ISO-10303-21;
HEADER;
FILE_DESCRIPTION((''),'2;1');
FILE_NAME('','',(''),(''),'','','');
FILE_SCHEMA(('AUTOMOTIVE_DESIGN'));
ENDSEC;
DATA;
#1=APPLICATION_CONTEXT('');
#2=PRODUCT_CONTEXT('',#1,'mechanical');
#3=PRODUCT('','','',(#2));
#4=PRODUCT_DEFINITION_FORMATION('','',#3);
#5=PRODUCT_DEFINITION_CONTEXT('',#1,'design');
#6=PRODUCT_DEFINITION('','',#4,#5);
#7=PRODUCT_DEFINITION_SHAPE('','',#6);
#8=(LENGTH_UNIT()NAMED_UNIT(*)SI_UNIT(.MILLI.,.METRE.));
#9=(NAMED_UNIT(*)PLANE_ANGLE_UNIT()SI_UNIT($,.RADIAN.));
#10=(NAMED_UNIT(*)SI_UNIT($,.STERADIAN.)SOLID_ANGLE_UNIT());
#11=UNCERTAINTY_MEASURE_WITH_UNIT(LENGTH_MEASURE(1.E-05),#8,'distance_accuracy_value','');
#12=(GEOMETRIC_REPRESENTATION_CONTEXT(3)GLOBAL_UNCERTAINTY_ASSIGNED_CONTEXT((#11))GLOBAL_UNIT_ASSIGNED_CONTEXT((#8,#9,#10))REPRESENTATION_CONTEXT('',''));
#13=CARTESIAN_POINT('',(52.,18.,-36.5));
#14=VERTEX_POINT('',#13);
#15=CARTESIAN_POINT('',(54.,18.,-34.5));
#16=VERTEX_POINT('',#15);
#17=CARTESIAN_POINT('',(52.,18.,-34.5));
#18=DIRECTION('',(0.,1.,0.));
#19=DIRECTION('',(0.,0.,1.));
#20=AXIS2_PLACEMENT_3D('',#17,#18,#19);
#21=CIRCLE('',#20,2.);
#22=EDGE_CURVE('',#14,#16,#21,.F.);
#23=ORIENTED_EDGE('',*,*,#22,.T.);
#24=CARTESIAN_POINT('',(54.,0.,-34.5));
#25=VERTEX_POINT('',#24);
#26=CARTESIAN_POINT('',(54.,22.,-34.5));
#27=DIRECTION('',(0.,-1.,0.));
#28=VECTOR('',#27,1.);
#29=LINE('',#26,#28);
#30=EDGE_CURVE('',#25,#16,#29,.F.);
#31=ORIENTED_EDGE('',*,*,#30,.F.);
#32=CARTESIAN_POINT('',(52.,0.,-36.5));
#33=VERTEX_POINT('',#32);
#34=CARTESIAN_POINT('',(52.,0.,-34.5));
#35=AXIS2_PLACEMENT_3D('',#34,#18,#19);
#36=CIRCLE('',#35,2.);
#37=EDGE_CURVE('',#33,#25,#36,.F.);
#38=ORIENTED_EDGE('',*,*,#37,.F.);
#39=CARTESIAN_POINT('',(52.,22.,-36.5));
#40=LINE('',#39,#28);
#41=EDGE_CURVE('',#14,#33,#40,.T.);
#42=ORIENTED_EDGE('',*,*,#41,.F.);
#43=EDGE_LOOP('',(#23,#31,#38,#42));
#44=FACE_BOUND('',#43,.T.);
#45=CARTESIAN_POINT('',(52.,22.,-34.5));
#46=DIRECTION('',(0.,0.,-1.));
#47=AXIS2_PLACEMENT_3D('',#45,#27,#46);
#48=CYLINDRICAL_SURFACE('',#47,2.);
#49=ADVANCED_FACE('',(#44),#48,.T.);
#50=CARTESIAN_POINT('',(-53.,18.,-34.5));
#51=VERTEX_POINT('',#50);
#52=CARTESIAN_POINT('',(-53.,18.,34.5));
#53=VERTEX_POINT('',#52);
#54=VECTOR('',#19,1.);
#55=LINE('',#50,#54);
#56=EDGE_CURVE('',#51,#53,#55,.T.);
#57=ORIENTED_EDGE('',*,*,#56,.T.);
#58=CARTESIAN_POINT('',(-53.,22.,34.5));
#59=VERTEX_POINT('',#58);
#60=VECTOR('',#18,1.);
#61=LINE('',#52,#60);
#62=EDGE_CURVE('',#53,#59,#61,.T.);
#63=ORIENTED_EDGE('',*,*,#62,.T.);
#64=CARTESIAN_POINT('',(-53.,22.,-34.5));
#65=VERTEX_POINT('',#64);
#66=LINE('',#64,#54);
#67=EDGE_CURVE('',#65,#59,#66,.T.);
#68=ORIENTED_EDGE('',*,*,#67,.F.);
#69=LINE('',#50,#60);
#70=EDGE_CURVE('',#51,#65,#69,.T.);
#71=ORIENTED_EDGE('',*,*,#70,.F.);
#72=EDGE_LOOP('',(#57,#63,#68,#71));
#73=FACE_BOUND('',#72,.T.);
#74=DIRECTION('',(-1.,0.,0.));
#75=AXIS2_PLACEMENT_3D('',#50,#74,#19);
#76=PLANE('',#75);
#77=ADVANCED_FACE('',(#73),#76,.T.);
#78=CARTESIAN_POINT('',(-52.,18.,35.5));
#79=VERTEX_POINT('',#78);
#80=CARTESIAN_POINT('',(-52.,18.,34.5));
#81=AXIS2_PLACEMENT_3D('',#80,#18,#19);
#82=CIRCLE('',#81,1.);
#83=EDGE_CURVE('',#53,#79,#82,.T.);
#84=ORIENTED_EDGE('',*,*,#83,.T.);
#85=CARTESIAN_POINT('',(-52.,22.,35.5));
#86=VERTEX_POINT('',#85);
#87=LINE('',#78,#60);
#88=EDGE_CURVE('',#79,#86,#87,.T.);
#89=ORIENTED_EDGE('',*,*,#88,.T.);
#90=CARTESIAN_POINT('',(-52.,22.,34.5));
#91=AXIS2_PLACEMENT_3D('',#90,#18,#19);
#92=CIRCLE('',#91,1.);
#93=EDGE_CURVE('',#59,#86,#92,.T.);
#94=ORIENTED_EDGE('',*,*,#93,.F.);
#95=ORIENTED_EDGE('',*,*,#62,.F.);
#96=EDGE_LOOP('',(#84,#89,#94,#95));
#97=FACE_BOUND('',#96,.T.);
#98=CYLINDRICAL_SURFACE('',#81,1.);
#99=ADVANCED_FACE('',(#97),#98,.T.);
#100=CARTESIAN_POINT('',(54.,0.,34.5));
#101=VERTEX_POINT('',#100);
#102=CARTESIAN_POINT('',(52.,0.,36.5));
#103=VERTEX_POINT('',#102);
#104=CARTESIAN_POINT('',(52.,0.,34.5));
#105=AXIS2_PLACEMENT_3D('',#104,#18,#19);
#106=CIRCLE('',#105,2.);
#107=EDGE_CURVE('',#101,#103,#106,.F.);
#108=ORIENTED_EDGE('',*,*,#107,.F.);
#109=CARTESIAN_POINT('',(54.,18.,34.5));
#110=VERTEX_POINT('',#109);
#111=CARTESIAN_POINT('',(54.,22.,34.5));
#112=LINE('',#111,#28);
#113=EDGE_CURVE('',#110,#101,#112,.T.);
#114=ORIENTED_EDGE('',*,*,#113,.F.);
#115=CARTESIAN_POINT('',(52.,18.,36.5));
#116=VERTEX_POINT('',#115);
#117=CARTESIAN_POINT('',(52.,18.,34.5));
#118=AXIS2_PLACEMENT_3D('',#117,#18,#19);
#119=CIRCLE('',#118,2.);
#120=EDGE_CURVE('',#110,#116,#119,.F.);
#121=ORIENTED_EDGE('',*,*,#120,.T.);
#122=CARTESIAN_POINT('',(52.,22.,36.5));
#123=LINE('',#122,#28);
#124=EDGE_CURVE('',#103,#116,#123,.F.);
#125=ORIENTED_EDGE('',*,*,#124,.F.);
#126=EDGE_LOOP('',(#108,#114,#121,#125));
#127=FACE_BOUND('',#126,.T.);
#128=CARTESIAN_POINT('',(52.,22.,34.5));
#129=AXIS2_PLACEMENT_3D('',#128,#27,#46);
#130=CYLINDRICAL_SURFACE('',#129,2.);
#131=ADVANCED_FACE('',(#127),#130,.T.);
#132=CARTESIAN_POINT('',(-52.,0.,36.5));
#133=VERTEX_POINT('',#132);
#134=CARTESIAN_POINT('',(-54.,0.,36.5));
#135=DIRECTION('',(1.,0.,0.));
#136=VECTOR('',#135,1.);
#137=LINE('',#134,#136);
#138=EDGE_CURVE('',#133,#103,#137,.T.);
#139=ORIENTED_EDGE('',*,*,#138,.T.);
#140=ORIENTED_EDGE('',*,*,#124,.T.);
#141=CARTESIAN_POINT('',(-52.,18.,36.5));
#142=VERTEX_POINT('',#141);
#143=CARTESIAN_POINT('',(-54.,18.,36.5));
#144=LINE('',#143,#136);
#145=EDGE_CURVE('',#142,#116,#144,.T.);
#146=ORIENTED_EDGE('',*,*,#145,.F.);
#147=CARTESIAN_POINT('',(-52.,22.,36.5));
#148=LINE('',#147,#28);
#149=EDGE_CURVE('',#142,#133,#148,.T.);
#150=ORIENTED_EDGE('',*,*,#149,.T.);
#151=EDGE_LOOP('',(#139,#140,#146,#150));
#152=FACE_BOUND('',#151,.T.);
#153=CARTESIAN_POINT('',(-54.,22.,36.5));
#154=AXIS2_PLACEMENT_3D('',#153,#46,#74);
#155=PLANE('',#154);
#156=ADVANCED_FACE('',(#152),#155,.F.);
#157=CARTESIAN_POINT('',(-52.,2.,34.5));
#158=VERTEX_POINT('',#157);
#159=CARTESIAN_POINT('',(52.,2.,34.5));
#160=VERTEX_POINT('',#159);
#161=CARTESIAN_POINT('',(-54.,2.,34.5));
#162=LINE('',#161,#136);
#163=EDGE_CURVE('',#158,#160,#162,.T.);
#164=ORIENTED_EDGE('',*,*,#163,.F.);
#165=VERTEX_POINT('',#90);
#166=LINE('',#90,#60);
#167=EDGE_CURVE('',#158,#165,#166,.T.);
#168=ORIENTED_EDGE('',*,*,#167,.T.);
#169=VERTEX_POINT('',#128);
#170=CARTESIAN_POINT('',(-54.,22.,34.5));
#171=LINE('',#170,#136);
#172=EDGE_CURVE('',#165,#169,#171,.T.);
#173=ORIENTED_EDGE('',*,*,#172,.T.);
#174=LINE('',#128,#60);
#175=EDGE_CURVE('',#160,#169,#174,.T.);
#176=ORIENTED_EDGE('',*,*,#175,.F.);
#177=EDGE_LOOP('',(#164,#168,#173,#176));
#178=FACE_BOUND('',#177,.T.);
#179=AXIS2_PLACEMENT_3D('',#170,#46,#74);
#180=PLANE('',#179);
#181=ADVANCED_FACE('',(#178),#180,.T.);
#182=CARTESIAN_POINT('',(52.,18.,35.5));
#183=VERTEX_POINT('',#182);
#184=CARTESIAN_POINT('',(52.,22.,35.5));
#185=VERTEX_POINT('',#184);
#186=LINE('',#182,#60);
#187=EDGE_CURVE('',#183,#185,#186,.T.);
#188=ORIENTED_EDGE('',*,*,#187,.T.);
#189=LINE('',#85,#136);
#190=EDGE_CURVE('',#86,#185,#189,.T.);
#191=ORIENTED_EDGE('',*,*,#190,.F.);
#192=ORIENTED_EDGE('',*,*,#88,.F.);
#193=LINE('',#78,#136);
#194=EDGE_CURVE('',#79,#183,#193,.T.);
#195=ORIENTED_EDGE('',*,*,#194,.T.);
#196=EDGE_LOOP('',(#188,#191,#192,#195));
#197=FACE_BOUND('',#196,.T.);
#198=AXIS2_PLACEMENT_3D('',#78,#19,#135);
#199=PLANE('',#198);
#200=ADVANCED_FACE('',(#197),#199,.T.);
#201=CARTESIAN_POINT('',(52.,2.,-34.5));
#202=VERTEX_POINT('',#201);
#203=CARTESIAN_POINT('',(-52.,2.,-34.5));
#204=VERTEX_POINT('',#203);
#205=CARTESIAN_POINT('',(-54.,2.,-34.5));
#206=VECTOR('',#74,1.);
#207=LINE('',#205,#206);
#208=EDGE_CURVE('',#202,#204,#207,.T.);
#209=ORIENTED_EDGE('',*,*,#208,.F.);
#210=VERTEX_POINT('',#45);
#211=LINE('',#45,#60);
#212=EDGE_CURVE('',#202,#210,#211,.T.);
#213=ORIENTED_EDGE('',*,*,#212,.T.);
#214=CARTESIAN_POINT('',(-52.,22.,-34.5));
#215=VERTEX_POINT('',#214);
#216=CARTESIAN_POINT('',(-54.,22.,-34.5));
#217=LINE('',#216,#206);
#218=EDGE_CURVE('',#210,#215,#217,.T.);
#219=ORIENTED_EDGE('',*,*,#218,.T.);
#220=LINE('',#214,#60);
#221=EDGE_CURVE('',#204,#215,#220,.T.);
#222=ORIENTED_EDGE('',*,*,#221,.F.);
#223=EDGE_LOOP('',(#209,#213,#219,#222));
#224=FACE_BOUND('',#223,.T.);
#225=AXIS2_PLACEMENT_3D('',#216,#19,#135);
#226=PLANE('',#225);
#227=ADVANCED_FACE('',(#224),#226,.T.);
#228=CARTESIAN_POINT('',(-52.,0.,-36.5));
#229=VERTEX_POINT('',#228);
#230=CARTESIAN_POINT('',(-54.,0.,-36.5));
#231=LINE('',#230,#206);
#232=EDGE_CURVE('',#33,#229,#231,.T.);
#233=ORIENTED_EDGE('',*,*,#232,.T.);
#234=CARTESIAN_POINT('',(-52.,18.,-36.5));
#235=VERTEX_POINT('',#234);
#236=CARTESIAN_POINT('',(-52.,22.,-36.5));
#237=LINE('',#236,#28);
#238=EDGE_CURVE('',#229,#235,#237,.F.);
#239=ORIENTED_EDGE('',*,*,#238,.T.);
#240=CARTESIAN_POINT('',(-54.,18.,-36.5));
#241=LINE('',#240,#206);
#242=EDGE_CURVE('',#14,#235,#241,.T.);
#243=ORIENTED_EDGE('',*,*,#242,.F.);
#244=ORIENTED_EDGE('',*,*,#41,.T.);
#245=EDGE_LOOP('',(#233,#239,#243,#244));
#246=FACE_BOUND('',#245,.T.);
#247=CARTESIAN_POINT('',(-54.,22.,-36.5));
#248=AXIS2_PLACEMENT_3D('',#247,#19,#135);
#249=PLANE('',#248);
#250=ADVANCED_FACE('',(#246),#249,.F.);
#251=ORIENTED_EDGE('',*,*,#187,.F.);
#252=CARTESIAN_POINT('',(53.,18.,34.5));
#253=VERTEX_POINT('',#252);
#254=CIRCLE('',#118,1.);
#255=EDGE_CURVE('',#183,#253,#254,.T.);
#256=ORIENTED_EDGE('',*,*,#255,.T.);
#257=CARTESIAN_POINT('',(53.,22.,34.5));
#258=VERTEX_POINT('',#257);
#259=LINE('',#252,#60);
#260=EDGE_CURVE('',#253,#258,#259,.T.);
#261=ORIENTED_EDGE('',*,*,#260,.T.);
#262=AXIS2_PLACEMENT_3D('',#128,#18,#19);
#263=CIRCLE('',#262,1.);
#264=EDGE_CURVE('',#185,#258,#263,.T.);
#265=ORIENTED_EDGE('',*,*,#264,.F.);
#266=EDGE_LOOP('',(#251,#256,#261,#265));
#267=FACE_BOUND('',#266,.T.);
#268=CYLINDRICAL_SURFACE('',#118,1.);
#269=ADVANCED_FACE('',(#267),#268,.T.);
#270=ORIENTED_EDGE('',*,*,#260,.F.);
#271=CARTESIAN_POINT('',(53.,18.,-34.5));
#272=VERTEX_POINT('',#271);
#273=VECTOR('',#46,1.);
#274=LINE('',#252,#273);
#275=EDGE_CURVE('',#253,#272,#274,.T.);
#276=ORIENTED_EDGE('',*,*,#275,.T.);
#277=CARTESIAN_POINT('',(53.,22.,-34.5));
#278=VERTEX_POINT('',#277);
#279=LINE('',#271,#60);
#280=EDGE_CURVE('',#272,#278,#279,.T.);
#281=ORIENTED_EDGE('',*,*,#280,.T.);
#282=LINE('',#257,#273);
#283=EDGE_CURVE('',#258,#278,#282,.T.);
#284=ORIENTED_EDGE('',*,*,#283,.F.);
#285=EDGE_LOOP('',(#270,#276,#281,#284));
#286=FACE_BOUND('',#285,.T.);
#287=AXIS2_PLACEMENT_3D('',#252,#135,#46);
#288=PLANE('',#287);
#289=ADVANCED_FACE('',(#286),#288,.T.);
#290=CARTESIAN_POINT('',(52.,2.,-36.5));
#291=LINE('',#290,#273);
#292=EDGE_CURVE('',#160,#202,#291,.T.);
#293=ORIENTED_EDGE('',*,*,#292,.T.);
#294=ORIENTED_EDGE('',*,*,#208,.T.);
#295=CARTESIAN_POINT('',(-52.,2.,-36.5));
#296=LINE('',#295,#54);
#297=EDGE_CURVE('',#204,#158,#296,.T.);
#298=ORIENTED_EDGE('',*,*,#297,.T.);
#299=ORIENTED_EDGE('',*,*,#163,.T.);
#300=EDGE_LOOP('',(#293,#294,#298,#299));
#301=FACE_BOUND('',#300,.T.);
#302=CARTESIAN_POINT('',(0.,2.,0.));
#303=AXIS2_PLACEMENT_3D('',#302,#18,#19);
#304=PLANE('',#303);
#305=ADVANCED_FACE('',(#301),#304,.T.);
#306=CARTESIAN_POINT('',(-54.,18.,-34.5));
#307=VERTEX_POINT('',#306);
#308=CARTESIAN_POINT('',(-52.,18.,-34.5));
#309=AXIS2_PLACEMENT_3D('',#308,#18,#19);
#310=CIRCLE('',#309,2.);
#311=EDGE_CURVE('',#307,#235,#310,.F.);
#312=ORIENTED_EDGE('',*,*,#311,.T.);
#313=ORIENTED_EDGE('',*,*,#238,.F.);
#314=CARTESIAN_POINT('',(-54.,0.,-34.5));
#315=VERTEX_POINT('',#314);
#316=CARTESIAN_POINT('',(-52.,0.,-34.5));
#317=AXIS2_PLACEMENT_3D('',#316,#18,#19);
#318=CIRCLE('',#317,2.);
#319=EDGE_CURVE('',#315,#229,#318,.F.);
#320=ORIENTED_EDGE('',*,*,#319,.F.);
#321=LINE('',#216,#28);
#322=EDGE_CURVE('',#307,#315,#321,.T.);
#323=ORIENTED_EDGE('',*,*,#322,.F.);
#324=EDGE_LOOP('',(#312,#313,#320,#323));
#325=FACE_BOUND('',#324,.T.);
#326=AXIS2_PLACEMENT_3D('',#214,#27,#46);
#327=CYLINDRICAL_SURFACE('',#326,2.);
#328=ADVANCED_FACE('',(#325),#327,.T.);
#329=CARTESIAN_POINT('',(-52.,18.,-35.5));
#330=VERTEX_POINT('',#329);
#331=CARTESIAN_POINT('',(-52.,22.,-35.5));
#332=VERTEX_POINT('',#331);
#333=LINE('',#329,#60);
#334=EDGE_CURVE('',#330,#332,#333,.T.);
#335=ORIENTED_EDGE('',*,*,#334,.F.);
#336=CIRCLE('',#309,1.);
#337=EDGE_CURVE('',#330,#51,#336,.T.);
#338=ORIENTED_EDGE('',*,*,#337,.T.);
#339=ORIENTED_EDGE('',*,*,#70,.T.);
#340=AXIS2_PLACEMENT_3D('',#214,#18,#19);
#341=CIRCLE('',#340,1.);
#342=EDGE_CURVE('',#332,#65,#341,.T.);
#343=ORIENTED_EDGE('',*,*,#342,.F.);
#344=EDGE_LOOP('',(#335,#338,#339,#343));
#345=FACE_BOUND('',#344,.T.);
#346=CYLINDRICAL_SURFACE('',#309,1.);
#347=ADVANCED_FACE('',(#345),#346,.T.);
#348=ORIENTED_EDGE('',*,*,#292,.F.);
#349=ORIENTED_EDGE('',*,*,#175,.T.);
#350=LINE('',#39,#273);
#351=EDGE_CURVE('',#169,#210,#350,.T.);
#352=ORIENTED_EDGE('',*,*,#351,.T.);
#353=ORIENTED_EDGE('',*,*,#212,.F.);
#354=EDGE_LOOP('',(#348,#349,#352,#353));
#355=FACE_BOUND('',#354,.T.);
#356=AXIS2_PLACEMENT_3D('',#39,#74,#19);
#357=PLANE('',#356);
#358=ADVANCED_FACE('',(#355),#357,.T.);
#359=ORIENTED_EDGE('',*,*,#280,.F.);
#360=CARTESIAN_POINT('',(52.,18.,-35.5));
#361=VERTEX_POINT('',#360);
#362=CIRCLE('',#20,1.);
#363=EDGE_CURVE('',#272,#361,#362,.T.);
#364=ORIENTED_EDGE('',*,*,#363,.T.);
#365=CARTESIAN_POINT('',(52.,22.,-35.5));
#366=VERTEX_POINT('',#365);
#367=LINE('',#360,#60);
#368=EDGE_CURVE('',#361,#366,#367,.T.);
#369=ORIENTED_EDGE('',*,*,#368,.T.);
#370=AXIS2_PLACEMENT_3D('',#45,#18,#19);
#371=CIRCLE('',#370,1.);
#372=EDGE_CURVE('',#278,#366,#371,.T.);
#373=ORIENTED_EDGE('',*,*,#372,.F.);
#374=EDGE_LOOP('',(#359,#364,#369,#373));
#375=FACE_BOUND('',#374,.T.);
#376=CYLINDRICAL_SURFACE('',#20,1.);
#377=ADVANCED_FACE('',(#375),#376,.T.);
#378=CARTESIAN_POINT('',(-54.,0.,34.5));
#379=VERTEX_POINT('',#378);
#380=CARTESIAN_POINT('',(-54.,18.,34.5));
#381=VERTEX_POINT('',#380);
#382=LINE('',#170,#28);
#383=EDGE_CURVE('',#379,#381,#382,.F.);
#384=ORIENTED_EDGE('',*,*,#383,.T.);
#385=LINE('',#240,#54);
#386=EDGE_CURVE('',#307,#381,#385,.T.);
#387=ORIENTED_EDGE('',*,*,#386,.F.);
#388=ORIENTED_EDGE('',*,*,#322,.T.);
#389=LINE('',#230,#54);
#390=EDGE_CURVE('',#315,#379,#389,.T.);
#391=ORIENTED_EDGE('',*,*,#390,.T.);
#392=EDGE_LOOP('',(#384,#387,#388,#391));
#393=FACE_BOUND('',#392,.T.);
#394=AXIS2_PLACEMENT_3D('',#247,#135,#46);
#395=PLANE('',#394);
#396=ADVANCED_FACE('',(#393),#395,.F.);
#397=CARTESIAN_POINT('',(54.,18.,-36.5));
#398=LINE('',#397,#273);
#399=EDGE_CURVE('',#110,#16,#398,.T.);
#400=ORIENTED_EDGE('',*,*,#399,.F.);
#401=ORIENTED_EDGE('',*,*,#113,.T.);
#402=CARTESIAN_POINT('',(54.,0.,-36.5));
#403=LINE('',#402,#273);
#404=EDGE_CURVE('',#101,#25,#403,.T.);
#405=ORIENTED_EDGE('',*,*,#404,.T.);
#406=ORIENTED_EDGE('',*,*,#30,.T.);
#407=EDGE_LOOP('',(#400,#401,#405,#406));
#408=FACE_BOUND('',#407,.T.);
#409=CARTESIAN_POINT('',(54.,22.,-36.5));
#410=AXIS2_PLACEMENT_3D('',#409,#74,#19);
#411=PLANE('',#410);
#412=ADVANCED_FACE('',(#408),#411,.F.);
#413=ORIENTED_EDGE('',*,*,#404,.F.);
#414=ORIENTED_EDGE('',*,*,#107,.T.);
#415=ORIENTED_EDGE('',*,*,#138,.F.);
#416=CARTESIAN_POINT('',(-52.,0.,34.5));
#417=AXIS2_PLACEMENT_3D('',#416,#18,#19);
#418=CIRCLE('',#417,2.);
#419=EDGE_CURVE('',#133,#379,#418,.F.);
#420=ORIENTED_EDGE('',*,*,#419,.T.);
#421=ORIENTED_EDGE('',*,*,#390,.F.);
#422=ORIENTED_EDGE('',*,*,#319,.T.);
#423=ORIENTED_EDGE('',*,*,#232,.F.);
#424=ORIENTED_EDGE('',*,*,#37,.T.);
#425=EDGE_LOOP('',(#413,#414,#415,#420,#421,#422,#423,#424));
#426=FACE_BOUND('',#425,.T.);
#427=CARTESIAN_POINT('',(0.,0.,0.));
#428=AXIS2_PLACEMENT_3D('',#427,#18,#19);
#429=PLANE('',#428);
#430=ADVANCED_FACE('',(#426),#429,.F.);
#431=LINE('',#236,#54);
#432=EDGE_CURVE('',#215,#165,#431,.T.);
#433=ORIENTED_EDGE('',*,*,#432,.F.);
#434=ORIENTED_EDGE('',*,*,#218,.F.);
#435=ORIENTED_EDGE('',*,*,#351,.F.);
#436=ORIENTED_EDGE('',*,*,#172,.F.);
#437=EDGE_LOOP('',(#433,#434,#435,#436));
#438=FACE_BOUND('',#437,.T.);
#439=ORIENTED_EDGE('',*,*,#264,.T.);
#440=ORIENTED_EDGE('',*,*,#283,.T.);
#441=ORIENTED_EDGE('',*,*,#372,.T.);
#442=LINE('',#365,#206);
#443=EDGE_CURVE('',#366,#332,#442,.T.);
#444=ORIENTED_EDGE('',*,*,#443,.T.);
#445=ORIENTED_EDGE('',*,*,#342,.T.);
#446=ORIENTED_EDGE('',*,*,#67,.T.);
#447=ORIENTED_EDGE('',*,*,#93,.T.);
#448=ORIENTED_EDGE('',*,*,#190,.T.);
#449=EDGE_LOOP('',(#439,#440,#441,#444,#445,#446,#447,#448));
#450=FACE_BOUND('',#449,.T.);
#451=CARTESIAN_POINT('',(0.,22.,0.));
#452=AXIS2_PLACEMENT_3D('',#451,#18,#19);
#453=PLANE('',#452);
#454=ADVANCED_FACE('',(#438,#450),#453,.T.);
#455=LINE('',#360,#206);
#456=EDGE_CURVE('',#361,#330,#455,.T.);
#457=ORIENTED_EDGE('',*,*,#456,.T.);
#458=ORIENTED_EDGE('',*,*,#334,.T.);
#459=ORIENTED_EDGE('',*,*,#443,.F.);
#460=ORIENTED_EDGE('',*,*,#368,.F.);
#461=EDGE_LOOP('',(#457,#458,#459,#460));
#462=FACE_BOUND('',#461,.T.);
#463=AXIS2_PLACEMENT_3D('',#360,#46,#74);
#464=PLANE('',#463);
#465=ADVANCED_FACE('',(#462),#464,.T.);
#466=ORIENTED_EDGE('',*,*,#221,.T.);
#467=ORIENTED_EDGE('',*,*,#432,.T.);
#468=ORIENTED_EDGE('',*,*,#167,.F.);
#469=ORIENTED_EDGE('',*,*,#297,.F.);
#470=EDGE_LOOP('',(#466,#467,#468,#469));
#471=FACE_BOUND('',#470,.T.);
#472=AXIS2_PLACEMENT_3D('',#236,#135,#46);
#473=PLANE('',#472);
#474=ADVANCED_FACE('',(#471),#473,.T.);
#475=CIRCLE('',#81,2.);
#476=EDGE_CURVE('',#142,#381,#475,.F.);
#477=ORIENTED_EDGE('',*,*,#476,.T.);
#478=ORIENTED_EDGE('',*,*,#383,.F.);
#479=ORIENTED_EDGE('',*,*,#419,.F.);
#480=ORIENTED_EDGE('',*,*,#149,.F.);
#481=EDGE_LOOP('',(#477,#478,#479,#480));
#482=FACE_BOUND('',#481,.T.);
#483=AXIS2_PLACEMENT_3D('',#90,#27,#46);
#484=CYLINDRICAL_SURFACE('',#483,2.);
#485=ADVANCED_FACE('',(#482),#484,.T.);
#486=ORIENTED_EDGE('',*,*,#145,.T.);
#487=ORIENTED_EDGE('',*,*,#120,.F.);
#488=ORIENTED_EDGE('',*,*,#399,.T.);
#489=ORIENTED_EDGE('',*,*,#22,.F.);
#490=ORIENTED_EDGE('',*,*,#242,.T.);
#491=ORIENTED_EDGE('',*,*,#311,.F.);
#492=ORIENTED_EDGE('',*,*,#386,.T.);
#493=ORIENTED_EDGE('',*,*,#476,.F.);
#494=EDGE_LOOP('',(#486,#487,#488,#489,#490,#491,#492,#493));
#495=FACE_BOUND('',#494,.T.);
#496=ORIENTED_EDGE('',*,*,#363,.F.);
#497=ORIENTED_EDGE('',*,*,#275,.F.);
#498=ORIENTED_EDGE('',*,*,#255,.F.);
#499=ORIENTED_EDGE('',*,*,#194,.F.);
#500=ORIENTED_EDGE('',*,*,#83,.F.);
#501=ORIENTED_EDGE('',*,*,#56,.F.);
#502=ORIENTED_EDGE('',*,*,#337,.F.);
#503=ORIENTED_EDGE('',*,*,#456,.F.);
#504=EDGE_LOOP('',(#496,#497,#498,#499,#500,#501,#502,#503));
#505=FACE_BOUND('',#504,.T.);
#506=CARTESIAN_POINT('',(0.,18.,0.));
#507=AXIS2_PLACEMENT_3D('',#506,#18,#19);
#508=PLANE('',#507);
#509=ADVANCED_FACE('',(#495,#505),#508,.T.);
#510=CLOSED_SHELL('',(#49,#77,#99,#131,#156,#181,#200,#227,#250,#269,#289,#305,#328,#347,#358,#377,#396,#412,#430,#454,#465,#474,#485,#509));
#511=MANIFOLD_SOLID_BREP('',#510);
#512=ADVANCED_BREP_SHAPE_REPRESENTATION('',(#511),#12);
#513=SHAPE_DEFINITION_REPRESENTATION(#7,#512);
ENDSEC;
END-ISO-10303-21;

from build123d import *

# Parameters (mm, degrees)
SKETCH1_W           = 108
SKETCH1_H           = 73
BOSS_EXTRUDE1_DEPTH = 22
FILLET1_R           = 2
SHELL1_START        = -52
SHELL1_OUTLINE_W    = 20
SHELL1_OUTLINE_H    = 69
SHELL1_DEPTH        = 104
SKETCH6_OUTSIDE_W   = 136.44
SKETCH6_OUTSIDE_H   = 101.44
CUT_EXTRUDE5_DEPTH  = 4


# Read off the part's stored shape, not the designer's step: Shell1
with BuildPart() as part:
    # Sketch1 → Boss-Extrude1 (new body)
    with BuildSketch(Plane(origin=(0, 0, 0), x_dir=(1, 0, 0), z_dir=(0, 1, 0))):
        Rectangle(SKETCH1_W, SKETCH1_H)
    extrude(amount=BOSS_EXTRUDE1_DEPTH)

    # Fillet1
    fillet1_edges = [part.edges().sort_by_distance(p)[0] for p in [
        (54, 11, 36.5),
        (-54, 11, 36.5),
        (-54, 11, -36.5),
        (54, 11, -36.5),
    ]]
    fillet(fillet1_edges, radius=FILLET1_R)

    # Shell1 outline → Shell1 (cut)
    with BuildSketch(Plane.YZ.offset(SHELL1_START)):
        with Locations((12, 0)):
            Rectangle(SHELL1_OUTLINE_W, SHELL1_OUTLINE_H)
    extrude(amount=SHELL1_DEPTH, mode=Mode.SUBTRACT)

    # Sketch6 outside → Cut-Extrude5 (cut)
    with BuildSketch(Plane(origin=(0, 22, 0), x_dir=(1, 0, 0), z_dir=(0, 1, 0))):
        Rectangle(SKETCH6_OUTSIDE_W, SKETCH6_OUTSIDE_H)
        with BuildLine():
            Line((53, -34.5), (53, 34.5))
            ThreePointArc((53, 34.5), (52.707106781, 35.207106781), (52, 35.5))
            Line((52, 35.5), (-52, 35.5))
            ThreePointArc((-52, 35.5), (-52.707106781, 35.207106781), (-53, 34.5))
            Line((-53, 34.5), (-53, -34.5))
            ThreePointArc((-53, -34.5), (-52.707106781, -35.207106781), (-52, -35.5))
            Line((-52, -35.5), (52, -35.5))
            ThreePointArc((52, -35.5), (52.707106781, -35.207106781), (53, -34.5))
        make_face(mode=Mode.SUBTRACT)
    extrude(amount=-CUT_EXTRUDE5_DEPTH, mode=Mode.SUBTRACT)


solid = part.part
